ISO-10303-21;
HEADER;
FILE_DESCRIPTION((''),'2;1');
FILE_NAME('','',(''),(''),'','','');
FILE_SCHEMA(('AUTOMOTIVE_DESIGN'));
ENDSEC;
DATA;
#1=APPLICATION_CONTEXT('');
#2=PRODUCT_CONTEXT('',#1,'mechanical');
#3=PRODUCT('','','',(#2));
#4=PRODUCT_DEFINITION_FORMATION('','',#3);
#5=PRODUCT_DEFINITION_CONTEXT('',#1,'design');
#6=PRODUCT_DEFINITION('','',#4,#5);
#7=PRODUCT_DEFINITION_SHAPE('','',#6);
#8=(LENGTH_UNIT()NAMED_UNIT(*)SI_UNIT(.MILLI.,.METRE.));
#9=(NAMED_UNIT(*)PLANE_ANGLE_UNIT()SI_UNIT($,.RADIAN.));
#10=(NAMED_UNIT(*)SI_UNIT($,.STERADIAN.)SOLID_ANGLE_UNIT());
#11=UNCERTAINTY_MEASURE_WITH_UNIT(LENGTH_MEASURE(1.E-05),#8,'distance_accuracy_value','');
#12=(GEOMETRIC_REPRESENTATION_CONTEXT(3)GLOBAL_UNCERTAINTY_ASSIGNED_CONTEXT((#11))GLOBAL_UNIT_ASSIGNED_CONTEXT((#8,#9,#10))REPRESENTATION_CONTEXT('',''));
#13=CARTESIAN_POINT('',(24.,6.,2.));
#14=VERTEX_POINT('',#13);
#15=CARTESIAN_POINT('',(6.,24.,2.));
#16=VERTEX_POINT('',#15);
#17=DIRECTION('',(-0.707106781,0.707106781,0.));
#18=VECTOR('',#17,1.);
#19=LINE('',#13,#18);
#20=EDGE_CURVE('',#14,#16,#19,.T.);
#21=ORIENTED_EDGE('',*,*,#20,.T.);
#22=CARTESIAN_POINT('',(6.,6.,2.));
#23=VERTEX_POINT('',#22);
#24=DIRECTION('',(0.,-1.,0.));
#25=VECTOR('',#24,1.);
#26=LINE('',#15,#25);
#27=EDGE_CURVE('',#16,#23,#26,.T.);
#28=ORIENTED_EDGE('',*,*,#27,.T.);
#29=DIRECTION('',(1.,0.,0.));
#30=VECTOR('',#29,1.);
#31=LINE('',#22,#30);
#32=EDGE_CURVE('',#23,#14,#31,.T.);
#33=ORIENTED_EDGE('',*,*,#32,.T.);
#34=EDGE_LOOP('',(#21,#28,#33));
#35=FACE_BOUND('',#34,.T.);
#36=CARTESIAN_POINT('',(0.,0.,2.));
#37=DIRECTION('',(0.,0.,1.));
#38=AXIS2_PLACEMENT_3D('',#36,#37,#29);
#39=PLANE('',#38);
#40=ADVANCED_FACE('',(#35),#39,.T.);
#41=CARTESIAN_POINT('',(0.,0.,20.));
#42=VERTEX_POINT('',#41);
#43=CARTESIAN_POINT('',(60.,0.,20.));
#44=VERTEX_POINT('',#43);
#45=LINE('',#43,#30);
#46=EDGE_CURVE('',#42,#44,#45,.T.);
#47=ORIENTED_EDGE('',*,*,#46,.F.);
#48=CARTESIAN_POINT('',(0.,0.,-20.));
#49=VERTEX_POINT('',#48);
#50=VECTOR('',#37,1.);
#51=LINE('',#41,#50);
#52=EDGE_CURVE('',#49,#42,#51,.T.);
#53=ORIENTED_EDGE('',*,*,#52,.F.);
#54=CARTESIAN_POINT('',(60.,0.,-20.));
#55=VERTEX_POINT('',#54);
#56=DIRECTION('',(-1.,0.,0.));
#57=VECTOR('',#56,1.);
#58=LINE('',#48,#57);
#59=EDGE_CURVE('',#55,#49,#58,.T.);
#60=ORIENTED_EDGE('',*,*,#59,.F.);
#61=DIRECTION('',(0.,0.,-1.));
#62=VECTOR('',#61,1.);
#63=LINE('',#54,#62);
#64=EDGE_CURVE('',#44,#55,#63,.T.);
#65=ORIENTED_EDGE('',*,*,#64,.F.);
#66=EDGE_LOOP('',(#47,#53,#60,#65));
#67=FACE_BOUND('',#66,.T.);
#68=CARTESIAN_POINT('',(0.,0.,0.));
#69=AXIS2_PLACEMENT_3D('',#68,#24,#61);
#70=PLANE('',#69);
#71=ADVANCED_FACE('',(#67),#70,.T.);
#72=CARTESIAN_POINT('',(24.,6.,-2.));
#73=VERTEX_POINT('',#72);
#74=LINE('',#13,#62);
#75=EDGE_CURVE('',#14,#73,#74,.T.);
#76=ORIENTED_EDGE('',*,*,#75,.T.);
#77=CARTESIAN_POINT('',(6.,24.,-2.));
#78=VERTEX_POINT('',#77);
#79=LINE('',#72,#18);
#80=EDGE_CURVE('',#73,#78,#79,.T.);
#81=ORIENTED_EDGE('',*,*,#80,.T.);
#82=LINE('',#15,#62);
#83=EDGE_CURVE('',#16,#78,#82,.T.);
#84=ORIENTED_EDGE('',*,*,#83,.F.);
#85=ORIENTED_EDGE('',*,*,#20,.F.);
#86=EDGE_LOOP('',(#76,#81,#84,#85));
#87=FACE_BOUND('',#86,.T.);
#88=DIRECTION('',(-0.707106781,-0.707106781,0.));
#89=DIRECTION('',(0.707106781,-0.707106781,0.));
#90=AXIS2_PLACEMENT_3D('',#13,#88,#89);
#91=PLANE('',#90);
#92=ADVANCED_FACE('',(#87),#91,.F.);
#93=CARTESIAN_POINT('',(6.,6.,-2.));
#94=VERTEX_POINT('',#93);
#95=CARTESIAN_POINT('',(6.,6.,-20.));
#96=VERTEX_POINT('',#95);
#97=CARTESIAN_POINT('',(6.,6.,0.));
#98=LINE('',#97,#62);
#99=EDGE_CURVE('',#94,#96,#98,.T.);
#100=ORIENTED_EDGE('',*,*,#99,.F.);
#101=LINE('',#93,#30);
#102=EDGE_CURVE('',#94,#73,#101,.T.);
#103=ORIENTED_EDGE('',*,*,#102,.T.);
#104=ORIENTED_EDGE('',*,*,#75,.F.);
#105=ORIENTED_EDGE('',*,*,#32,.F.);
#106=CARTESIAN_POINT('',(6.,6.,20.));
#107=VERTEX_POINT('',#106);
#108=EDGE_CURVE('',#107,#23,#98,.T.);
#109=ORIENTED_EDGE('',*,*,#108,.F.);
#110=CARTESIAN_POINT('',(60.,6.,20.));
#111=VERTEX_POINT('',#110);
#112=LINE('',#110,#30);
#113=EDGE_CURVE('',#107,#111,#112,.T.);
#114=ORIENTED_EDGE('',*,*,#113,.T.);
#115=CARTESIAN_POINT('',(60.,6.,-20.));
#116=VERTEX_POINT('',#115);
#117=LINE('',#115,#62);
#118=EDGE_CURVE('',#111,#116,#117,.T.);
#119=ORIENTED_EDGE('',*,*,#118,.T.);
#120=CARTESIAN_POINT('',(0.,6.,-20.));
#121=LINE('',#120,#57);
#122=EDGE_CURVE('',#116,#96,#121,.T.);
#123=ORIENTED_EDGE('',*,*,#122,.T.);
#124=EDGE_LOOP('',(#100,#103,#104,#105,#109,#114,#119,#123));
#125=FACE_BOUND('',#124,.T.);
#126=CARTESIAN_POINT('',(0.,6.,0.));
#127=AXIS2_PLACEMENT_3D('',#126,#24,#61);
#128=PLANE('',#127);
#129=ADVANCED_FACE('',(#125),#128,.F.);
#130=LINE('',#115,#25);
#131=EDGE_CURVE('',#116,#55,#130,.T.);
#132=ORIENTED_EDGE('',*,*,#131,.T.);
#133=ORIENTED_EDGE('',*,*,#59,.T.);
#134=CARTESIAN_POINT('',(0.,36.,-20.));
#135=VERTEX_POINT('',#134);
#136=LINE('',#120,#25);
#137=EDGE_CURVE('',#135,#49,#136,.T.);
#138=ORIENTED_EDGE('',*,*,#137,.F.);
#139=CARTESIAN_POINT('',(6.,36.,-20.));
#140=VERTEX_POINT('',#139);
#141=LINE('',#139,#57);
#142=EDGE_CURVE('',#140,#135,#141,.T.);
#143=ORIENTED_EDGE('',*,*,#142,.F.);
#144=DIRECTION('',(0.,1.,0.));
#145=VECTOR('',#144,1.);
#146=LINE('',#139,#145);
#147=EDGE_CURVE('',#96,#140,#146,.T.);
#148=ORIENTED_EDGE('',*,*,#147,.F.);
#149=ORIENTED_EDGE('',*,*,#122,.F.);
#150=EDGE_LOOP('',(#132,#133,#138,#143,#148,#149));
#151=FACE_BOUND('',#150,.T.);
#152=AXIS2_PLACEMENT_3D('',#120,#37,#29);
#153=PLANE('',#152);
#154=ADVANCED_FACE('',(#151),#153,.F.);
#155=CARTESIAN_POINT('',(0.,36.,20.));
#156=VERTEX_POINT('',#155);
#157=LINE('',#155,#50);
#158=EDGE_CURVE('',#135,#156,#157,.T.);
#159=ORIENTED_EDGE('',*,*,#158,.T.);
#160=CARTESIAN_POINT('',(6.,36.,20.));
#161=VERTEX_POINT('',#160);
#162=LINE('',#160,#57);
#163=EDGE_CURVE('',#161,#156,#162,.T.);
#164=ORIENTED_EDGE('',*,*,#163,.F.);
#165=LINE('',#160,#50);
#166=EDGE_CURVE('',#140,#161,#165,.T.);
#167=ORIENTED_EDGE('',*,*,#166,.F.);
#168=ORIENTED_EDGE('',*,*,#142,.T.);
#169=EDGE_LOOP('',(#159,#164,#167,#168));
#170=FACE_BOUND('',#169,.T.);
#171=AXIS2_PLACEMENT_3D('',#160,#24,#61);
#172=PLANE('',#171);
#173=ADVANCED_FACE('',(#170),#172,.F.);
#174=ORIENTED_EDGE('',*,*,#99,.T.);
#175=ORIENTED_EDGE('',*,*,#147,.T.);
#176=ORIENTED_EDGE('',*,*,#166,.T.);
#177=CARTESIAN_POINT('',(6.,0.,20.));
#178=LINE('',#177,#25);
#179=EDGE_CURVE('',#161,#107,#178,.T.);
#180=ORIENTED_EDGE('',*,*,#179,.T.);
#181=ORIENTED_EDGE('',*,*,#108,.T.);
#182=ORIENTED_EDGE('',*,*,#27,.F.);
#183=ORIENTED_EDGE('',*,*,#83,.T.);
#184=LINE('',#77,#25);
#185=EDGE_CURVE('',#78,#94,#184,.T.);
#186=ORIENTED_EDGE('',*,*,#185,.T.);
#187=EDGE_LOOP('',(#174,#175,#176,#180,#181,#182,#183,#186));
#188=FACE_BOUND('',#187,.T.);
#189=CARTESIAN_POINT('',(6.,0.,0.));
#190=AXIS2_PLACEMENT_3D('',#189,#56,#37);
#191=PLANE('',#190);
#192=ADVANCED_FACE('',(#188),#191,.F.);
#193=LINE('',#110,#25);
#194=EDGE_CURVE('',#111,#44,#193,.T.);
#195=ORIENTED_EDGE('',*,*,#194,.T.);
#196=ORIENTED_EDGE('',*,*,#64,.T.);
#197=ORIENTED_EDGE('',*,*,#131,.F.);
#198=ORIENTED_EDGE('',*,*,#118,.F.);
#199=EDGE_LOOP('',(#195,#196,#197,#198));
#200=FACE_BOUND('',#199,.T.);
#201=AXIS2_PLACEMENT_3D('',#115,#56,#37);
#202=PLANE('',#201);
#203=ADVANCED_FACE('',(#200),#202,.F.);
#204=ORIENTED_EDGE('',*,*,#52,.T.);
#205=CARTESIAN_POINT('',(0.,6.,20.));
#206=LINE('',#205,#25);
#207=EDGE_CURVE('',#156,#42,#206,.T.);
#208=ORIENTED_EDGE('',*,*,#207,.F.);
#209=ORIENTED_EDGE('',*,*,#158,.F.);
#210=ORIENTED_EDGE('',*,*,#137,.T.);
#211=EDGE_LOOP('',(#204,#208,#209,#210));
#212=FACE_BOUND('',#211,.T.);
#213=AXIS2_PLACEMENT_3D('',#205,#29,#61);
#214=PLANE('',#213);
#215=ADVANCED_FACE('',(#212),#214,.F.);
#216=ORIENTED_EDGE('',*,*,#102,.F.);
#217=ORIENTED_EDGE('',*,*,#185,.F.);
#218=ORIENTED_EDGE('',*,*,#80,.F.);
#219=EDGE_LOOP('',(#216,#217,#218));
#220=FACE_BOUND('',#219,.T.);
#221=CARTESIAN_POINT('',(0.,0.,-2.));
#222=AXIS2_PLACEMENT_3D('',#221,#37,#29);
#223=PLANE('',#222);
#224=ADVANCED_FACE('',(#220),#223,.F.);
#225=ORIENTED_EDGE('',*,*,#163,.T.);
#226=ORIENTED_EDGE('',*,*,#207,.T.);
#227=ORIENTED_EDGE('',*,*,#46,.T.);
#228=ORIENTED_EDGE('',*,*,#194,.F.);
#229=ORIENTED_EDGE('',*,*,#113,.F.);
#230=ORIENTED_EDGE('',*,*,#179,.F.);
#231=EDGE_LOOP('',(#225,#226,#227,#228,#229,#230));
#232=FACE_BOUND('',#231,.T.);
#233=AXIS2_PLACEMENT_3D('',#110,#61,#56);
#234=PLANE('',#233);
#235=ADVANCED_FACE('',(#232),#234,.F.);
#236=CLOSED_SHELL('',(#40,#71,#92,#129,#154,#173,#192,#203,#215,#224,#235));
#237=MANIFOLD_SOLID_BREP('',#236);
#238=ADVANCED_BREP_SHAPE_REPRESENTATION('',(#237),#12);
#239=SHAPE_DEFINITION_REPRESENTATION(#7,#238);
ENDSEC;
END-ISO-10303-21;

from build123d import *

# Parameters (mm, degrees)
SKETCH_1_W      = 60
SKETCH_1_H      = 40
EXTRUDE_1_DEPTH = 6
SKETCH_2_W      = 40
SKETCH_2_H      = 36
EXTRUDE_2_DEPTH = 6
EXTRUDE_START   = -2
EXTRUDE_3_DEPTH = 4


# Read off the part's stored shape, not the designer's step: 凸台-拉伸3
with BuildPart() as part:
    # 草图1 → 凸台-拉伸1 (new body)
    with BuildSketch(Plane(origin=(0, 0, 0), x_dir=(1, 0, 0), z_dir=(0, 1, 0))):
        with Locations((30, 0)):
            Rectangle(SKETCH_1_W, SKETCH_1_H)
    extrude(amount=EXTRUDE_1_DEPTH)

    # 草图2 → 凸台-拉伸2 (add)
    with BuildSketch(Plane(origin=(0, 0, 0), x_dir=(0, 0, -1), z_dir=(1, 0, 0))):
        with Locations((0, 18)):
            Rectangle(SKETCH_2_W, SKETCH_2_H)
    extrude(amount=EXTRUDE_2_DEPTH)

    # 凸台-拉伸3 outline → 凸台-拉伸3 (add)
    with BuildSketch(Plane.XY.offset(EXTRUDE_START)):
        Polygon((24, 6), (6, 24), (6, 6), align=None)
    extrude(amount=EXTRUDE_3_DEPTH)


solid = part.part
